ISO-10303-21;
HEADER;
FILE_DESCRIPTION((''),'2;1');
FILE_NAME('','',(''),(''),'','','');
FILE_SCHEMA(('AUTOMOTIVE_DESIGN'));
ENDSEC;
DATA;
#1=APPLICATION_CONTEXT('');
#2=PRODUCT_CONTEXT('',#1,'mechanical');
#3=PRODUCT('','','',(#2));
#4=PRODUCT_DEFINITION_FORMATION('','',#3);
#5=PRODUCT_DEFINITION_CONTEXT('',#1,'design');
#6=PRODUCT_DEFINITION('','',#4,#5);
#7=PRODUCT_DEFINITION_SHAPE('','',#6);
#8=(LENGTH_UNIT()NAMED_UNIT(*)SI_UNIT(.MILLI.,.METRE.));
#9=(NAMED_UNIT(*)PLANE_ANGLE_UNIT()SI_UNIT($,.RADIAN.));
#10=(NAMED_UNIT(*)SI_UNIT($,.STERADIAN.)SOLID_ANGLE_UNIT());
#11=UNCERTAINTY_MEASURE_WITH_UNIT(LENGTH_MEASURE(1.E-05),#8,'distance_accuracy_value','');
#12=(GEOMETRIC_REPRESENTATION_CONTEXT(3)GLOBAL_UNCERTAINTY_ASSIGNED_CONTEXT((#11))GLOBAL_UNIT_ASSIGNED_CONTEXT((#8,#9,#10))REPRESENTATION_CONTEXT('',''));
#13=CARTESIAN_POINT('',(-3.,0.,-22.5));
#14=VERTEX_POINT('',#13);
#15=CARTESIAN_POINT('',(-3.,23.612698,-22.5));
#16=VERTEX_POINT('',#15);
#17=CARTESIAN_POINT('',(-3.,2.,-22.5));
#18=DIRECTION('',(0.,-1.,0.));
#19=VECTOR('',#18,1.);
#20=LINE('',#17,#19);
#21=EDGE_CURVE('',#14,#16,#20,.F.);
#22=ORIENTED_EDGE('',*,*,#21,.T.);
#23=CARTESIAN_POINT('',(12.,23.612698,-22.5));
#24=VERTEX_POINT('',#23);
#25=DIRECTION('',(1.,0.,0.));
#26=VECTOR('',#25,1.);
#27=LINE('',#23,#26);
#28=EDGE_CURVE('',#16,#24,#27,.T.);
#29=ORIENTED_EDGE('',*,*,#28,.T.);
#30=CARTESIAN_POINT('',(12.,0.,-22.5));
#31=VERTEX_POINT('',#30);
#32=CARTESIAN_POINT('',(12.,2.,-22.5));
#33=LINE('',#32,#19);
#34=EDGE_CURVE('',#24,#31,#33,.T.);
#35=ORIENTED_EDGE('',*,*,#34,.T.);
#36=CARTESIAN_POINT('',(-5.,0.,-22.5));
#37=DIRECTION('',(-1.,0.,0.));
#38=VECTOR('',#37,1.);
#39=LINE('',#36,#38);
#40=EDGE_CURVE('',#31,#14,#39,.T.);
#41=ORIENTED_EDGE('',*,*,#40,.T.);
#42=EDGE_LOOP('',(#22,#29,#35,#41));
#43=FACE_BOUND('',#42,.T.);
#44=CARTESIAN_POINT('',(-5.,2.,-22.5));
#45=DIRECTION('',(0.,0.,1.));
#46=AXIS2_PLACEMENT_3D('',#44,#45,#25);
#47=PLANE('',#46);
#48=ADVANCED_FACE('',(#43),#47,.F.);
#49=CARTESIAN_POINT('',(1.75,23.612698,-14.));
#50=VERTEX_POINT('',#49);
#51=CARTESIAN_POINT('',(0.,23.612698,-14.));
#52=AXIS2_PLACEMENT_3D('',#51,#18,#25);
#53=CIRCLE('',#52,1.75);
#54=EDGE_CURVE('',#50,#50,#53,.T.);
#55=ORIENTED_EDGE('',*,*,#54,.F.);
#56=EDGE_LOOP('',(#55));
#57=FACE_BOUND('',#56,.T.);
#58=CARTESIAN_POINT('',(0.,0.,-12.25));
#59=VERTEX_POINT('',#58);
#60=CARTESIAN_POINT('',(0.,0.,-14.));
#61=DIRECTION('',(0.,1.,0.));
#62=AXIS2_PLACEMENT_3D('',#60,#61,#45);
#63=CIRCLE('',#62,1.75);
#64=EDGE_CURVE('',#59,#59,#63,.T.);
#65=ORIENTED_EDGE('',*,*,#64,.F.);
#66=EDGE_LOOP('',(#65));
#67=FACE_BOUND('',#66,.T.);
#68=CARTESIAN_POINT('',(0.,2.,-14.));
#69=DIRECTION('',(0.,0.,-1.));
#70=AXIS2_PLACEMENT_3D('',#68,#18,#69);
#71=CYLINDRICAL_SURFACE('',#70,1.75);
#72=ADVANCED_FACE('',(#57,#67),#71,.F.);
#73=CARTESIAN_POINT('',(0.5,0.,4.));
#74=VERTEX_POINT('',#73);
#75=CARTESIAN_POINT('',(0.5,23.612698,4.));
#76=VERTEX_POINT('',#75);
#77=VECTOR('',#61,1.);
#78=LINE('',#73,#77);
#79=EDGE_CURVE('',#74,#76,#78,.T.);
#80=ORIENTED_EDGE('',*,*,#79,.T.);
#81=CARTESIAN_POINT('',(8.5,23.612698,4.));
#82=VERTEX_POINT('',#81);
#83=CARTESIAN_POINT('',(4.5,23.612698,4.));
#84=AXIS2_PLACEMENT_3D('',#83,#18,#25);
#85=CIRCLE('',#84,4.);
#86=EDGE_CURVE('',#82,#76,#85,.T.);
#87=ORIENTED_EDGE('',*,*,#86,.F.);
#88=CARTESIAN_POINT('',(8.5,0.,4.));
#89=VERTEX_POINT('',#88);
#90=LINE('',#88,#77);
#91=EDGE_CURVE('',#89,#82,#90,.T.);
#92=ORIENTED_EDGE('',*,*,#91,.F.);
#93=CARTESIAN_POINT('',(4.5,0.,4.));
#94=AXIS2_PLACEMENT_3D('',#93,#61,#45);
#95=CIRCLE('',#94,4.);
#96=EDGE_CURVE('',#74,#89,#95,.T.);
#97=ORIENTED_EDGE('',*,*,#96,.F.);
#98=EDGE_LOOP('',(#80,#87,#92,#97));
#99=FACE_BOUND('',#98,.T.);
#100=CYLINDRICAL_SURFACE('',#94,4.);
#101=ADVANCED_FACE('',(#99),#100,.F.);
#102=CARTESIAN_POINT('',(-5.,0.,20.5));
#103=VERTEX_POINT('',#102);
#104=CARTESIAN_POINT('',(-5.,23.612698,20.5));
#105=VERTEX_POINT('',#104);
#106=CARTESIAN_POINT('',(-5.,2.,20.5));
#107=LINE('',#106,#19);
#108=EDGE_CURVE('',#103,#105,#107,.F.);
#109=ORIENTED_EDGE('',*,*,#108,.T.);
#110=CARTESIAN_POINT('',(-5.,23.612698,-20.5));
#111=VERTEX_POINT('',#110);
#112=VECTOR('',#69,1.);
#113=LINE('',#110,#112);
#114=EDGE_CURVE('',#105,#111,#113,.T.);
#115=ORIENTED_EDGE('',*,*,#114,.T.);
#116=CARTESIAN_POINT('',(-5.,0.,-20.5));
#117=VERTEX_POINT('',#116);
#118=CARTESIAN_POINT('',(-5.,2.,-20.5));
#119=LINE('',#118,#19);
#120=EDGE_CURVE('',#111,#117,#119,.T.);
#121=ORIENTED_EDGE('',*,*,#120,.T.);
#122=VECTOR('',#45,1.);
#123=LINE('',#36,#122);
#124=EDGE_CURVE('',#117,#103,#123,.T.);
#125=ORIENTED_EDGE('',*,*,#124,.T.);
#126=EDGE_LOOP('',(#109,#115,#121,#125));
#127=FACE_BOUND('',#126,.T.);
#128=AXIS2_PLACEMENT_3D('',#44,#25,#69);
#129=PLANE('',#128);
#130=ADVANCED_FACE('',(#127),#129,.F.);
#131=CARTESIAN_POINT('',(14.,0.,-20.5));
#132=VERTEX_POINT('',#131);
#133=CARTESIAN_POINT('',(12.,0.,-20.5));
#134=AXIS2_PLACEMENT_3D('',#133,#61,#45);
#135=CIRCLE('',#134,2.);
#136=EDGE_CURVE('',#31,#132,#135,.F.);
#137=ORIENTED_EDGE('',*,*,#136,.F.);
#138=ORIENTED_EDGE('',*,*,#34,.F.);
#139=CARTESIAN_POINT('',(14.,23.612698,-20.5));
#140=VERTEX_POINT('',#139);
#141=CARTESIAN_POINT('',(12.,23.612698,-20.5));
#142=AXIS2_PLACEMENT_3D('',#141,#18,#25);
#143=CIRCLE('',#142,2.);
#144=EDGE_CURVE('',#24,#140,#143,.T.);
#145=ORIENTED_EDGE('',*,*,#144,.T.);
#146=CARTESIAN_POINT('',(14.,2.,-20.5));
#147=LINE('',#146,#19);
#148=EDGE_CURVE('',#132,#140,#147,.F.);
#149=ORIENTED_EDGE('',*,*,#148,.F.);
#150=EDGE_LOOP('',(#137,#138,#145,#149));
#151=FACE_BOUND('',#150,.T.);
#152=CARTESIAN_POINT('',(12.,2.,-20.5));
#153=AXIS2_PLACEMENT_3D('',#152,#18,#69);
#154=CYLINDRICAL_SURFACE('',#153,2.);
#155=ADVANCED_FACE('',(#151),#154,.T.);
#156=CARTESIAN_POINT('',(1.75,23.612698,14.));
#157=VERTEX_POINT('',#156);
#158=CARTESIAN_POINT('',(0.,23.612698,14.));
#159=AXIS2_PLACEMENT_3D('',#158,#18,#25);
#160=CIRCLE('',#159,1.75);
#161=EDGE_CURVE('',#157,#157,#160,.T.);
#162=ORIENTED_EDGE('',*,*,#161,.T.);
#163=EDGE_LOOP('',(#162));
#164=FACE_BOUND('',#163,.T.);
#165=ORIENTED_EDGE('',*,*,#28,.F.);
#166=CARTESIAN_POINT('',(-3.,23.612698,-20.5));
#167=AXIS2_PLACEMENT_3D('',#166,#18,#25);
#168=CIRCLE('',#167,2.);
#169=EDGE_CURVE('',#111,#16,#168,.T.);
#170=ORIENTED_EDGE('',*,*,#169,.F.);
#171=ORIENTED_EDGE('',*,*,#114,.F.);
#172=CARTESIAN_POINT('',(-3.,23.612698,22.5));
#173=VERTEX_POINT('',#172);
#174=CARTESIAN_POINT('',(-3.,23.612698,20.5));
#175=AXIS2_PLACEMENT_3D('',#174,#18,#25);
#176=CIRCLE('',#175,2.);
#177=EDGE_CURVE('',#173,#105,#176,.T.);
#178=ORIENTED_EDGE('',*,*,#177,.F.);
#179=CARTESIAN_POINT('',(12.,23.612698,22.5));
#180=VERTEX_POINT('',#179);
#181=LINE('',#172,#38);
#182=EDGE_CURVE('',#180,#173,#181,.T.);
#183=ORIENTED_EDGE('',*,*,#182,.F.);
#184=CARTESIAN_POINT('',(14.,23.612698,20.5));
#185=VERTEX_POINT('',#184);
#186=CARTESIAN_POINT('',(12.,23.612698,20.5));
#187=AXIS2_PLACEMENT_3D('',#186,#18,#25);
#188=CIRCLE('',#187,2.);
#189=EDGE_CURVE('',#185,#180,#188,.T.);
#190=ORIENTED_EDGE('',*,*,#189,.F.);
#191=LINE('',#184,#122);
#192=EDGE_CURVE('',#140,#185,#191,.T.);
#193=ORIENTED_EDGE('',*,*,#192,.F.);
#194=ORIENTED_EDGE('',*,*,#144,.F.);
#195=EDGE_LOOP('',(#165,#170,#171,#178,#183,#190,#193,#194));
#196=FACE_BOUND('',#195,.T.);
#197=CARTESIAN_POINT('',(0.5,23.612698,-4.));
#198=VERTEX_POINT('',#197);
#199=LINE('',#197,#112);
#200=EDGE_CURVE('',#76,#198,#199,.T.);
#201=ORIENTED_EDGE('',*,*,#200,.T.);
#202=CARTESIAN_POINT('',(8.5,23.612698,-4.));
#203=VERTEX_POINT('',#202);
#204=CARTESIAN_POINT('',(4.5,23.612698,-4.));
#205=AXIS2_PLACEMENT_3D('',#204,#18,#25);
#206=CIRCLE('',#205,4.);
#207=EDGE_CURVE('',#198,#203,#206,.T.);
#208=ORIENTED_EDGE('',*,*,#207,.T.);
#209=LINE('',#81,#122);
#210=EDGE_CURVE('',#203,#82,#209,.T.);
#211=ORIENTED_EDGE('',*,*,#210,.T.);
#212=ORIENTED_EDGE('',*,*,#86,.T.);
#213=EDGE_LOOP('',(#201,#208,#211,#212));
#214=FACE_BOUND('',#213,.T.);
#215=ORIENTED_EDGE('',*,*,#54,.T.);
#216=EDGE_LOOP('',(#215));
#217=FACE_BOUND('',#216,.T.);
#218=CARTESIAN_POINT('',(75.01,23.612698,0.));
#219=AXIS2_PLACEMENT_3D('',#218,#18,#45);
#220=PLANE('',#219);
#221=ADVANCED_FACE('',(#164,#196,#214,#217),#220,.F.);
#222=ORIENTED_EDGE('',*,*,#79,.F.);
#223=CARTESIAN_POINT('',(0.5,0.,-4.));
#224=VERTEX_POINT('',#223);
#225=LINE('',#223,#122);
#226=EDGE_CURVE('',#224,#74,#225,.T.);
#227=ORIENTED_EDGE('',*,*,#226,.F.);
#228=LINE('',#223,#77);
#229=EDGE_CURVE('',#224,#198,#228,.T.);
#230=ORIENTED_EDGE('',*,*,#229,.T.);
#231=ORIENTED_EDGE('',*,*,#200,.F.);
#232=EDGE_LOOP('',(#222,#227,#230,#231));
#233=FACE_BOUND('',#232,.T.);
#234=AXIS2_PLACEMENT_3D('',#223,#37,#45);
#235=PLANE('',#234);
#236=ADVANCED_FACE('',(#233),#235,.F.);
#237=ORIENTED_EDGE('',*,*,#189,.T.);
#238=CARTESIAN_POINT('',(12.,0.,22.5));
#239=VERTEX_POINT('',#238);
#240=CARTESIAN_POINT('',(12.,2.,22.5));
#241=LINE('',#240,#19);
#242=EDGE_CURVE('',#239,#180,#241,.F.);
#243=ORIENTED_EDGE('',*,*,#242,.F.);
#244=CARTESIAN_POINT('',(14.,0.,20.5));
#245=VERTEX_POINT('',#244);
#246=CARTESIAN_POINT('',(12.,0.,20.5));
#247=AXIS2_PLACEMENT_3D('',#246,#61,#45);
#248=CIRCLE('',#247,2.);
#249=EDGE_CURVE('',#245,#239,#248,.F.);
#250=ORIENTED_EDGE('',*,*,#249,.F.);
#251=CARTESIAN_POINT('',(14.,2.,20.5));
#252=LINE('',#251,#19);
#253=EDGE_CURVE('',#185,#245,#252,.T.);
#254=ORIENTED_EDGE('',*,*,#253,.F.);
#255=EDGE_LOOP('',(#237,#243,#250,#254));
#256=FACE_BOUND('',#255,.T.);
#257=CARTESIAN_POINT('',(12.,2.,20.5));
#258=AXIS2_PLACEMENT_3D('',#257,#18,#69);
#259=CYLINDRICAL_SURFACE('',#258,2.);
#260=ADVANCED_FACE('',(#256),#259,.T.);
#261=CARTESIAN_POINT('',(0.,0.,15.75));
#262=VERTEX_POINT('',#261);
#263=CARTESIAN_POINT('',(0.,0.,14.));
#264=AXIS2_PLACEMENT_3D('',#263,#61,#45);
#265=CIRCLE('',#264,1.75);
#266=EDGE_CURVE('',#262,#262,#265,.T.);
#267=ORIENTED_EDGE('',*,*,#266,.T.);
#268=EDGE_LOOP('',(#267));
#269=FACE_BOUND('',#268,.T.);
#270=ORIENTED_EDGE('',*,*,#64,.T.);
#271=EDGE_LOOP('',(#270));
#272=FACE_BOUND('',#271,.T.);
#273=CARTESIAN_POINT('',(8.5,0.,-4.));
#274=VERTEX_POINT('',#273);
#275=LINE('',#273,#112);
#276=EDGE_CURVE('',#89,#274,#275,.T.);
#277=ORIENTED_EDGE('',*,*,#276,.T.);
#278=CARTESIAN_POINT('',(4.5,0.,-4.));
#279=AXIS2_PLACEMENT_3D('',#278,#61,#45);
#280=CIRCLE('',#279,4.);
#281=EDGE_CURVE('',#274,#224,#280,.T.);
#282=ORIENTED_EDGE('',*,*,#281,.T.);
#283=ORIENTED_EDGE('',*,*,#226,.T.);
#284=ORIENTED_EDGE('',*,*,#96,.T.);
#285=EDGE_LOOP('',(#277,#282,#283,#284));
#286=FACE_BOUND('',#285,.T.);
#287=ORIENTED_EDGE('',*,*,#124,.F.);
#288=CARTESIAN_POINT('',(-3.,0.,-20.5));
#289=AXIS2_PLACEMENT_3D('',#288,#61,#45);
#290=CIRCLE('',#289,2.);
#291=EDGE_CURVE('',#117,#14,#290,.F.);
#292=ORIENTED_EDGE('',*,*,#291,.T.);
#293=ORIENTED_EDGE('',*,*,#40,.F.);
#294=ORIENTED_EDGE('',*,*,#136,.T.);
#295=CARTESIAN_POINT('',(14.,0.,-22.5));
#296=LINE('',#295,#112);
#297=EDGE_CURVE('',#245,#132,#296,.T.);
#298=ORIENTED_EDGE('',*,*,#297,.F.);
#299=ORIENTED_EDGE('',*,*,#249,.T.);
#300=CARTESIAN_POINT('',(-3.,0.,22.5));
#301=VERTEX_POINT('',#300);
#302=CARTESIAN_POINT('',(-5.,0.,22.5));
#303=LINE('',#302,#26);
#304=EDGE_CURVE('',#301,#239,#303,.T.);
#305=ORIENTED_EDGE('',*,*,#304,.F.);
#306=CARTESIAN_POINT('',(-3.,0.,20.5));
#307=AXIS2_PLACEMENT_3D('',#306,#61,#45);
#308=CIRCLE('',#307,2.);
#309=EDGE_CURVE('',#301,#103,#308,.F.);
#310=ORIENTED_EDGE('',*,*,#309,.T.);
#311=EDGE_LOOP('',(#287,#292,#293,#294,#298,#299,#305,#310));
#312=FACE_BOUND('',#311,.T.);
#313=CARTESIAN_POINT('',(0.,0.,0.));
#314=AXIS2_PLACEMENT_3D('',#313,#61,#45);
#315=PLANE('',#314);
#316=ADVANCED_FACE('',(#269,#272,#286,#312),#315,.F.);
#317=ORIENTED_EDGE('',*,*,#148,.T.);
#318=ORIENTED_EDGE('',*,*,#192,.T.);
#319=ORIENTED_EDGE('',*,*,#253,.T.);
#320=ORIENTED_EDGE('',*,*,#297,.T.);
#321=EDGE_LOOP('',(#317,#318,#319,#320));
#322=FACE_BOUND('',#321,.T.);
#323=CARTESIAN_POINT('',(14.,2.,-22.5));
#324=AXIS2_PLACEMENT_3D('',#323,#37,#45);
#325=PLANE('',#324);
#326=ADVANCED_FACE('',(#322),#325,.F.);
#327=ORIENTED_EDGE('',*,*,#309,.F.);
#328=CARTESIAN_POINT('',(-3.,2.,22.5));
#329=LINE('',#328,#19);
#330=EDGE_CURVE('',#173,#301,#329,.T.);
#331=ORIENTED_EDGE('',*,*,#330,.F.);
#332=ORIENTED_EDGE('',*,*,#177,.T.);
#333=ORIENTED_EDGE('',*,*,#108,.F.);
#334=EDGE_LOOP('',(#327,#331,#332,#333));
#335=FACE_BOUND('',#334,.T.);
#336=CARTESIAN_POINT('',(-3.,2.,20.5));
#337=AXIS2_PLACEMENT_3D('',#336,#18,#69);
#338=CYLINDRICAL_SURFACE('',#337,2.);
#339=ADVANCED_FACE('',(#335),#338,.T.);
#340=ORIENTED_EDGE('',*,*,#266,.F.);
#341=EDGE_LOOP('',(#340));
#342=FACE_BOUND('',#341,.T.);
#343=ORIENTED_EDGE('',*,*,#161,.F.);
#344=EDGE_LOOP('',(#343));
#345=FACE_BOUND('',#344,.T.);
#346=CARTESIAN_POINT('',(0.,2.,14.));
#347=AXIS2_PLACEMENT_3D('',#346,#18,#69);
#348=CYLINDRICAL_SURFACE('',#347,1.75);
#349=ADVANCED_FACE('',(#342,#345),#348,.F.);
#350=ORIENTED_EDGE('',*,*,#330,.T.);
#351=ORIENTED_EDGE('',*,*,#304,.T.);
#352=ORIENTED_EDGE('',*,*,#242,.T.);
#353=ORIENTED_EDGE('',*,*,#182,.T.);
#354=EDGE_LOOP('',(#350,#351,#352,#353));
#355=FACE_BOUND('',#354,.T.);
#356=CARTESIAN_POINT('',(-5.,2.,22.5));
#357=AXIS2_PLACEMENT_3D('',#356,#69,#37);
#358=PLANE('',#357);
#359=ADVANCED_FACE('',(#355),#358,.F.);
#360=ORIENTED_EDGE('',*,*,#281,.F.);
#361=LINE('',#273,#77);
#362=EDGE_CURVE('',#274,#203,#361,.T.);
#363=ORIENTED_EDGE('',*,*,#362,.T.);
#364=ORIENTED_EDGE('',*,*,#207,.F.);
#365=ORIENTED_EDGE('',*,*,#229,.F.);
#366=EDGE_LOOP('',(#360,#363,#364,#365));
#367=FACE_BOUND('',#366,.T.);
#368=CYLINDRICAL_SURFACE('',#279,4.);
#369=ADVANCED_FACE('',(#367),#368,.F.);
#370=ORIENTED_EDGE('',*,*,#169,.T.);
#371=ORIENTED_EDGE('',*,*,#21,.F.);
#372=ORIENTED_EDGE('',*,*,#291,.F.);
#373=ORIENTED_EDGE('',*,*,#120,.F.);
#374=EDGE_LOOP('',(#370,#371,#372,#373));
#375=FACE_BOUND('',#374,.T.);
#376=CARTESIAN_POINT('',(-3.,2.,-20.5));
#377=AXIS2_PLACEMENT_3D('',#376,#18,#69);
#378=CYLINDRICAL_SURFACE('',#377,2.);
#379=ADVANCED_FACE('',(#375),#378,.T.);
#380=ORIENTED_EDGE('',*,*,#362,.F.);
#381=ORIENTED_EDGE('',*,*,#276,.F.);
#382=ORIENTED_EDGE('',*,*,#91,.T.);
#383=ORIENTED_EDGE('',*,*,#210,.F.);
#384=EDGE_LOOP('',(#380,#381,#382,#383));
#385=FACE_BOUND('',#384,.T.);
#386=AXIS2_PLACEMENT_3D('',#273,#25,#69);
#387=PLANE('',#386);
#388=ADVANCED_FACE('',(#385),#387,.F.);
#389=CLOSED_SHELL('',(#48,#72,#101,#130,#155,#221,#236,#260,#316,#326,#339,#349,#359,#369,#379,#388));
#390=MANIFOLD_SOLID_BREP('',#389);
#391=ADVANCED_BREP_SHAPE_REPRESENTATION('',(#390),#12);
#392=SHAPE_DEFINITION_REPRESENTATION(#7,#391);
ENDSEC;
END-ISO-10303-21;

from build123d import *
from build123d.topology import SkipClean

# Parameters (mm, degrees)
SKETCH_1_W          = 19
SKETCH_1_H          = 45
SKETCH_1_R          = 1.75
EXTRUDE_1_DEPTH     = 2
FILLET_1_R          = 2
CUT_EXTRUDE_1_DEPTH = 2
EXTRUDE_START       = 21.612698372
SKETCH_4_R          = 1.75
EXTRUDE_2_DEPTH     = 21.612698372


with BuildPart() as part:
    # 草图1 → 凸台-拉伸1 (new body)
    with BuildSketch(Plane(origin=(0, 0, 0), x_dir=(1, 0, 0), z_dir=(0, 1, 0))):
        with Locations((4.5, 0)):
            Rectangle(SKETCH_1_W, SKETCH_1_H)
        with Locations(Location((0, -14, 0), (0, 0, 270))):
            Circle(SKETCH_1_R, mode=Mode.SUBTRACT)
        with Locations(Location((0, 14, 0), (0, 0, 270))):
            Circle(SKETCH_1_R, mode=Mode.SUBTRACT)
    extrude(amount=EXTRUDE_1_DEPTH)

    # 圆角1
    fillet_1_edges = [part.edges().sort_by_distance(p)[0] for p in [
        (-5, 1, -22.5),
        (14, 1, -22.5),
        (14, 1, 22.5),
        (-5, 1, 22.5),
    ]]
    fillet(fillet_1_edges, radius=FILLET_1_R)

    # 草图3 → 切除-拉伸1 (cut)
    with BuildSketch(Plane(origin=(0, 2, 0), x_dir=(1, 0, 0), z_dir=(0, 1, 0))):
        with BuildLine():
            Line((8.5, 4), (8.5, -4))
            ThreePointArc((8.5, -4), (4.5, -8), (0.5, -4))
            Line((0.5, -4), (0.5, 4))
            ThreePointArc((0.5, 4), (4.5, 8), (8.5, 4))
        make_face()
    extrude(amount=-CUT_EXTRUDE_1_DEPTH, mode=Mode.SUBTRACT)

    # 草图4 → 凸台-拉伸2 (add)
    with SkipClean():  # the faces are left unmerged after this step: merging them gives an invalid solid
        with BuildSketch(Plane(origin=(0, 2, 0), x_dir=(1, 0, 0), z_dir=(0, 1, 0)).offset(EXTRUDE_START)):
            with BuildLine():
                Line((12, 22.5), (-3, 22.5))
                ThreePointArc((-3, 22.5), (-4.414213562, 21.914213562), (-5, 20.5))
                Line((-5, 20.5), (-5, -20.5))
                ThreePointArc((-5, -20.5), (-4.414213562, -21.914213562), (-3, -22.5))
                Line((-3, -22.5), (12, -22.5))
                ThreePointArc((12, -22.5), (13.414213562, -21.914213562), (14, -20.5))
                Line((14, -20.5), (14, 20.5))
                ThreePointArc((14, 20.5), (13.414213562, 21.914213562), (12, 22.5))
            make_face()
            with Locations((0, 14)):
                Circle(SKETCH_4_R, mode=Mode.SUBTRACT)
            with Locations((0, -14)):
                Circle(SKETCH_4_R, mode=Mode.SUBTRACT)
            with BuildLine():
                Line((8.5, -4), (8.5, 4))
                ThreePointArc((8.5, 4), (4.5, 8), (0.5, 4))
                Line((0.5, 4), (0.5, -4))
                ThreePointArc((0.5, -4), (4.5, -8), (8.5, -4))
            make_face(mode=Mode.SUBTRACT)
        extrude(amount=-EXTRUDE_2_DEPTH)
    add(part.part.scale(1), mode=Mode.REPLACE)  # the faces are merged on a copy


solid = part.part
